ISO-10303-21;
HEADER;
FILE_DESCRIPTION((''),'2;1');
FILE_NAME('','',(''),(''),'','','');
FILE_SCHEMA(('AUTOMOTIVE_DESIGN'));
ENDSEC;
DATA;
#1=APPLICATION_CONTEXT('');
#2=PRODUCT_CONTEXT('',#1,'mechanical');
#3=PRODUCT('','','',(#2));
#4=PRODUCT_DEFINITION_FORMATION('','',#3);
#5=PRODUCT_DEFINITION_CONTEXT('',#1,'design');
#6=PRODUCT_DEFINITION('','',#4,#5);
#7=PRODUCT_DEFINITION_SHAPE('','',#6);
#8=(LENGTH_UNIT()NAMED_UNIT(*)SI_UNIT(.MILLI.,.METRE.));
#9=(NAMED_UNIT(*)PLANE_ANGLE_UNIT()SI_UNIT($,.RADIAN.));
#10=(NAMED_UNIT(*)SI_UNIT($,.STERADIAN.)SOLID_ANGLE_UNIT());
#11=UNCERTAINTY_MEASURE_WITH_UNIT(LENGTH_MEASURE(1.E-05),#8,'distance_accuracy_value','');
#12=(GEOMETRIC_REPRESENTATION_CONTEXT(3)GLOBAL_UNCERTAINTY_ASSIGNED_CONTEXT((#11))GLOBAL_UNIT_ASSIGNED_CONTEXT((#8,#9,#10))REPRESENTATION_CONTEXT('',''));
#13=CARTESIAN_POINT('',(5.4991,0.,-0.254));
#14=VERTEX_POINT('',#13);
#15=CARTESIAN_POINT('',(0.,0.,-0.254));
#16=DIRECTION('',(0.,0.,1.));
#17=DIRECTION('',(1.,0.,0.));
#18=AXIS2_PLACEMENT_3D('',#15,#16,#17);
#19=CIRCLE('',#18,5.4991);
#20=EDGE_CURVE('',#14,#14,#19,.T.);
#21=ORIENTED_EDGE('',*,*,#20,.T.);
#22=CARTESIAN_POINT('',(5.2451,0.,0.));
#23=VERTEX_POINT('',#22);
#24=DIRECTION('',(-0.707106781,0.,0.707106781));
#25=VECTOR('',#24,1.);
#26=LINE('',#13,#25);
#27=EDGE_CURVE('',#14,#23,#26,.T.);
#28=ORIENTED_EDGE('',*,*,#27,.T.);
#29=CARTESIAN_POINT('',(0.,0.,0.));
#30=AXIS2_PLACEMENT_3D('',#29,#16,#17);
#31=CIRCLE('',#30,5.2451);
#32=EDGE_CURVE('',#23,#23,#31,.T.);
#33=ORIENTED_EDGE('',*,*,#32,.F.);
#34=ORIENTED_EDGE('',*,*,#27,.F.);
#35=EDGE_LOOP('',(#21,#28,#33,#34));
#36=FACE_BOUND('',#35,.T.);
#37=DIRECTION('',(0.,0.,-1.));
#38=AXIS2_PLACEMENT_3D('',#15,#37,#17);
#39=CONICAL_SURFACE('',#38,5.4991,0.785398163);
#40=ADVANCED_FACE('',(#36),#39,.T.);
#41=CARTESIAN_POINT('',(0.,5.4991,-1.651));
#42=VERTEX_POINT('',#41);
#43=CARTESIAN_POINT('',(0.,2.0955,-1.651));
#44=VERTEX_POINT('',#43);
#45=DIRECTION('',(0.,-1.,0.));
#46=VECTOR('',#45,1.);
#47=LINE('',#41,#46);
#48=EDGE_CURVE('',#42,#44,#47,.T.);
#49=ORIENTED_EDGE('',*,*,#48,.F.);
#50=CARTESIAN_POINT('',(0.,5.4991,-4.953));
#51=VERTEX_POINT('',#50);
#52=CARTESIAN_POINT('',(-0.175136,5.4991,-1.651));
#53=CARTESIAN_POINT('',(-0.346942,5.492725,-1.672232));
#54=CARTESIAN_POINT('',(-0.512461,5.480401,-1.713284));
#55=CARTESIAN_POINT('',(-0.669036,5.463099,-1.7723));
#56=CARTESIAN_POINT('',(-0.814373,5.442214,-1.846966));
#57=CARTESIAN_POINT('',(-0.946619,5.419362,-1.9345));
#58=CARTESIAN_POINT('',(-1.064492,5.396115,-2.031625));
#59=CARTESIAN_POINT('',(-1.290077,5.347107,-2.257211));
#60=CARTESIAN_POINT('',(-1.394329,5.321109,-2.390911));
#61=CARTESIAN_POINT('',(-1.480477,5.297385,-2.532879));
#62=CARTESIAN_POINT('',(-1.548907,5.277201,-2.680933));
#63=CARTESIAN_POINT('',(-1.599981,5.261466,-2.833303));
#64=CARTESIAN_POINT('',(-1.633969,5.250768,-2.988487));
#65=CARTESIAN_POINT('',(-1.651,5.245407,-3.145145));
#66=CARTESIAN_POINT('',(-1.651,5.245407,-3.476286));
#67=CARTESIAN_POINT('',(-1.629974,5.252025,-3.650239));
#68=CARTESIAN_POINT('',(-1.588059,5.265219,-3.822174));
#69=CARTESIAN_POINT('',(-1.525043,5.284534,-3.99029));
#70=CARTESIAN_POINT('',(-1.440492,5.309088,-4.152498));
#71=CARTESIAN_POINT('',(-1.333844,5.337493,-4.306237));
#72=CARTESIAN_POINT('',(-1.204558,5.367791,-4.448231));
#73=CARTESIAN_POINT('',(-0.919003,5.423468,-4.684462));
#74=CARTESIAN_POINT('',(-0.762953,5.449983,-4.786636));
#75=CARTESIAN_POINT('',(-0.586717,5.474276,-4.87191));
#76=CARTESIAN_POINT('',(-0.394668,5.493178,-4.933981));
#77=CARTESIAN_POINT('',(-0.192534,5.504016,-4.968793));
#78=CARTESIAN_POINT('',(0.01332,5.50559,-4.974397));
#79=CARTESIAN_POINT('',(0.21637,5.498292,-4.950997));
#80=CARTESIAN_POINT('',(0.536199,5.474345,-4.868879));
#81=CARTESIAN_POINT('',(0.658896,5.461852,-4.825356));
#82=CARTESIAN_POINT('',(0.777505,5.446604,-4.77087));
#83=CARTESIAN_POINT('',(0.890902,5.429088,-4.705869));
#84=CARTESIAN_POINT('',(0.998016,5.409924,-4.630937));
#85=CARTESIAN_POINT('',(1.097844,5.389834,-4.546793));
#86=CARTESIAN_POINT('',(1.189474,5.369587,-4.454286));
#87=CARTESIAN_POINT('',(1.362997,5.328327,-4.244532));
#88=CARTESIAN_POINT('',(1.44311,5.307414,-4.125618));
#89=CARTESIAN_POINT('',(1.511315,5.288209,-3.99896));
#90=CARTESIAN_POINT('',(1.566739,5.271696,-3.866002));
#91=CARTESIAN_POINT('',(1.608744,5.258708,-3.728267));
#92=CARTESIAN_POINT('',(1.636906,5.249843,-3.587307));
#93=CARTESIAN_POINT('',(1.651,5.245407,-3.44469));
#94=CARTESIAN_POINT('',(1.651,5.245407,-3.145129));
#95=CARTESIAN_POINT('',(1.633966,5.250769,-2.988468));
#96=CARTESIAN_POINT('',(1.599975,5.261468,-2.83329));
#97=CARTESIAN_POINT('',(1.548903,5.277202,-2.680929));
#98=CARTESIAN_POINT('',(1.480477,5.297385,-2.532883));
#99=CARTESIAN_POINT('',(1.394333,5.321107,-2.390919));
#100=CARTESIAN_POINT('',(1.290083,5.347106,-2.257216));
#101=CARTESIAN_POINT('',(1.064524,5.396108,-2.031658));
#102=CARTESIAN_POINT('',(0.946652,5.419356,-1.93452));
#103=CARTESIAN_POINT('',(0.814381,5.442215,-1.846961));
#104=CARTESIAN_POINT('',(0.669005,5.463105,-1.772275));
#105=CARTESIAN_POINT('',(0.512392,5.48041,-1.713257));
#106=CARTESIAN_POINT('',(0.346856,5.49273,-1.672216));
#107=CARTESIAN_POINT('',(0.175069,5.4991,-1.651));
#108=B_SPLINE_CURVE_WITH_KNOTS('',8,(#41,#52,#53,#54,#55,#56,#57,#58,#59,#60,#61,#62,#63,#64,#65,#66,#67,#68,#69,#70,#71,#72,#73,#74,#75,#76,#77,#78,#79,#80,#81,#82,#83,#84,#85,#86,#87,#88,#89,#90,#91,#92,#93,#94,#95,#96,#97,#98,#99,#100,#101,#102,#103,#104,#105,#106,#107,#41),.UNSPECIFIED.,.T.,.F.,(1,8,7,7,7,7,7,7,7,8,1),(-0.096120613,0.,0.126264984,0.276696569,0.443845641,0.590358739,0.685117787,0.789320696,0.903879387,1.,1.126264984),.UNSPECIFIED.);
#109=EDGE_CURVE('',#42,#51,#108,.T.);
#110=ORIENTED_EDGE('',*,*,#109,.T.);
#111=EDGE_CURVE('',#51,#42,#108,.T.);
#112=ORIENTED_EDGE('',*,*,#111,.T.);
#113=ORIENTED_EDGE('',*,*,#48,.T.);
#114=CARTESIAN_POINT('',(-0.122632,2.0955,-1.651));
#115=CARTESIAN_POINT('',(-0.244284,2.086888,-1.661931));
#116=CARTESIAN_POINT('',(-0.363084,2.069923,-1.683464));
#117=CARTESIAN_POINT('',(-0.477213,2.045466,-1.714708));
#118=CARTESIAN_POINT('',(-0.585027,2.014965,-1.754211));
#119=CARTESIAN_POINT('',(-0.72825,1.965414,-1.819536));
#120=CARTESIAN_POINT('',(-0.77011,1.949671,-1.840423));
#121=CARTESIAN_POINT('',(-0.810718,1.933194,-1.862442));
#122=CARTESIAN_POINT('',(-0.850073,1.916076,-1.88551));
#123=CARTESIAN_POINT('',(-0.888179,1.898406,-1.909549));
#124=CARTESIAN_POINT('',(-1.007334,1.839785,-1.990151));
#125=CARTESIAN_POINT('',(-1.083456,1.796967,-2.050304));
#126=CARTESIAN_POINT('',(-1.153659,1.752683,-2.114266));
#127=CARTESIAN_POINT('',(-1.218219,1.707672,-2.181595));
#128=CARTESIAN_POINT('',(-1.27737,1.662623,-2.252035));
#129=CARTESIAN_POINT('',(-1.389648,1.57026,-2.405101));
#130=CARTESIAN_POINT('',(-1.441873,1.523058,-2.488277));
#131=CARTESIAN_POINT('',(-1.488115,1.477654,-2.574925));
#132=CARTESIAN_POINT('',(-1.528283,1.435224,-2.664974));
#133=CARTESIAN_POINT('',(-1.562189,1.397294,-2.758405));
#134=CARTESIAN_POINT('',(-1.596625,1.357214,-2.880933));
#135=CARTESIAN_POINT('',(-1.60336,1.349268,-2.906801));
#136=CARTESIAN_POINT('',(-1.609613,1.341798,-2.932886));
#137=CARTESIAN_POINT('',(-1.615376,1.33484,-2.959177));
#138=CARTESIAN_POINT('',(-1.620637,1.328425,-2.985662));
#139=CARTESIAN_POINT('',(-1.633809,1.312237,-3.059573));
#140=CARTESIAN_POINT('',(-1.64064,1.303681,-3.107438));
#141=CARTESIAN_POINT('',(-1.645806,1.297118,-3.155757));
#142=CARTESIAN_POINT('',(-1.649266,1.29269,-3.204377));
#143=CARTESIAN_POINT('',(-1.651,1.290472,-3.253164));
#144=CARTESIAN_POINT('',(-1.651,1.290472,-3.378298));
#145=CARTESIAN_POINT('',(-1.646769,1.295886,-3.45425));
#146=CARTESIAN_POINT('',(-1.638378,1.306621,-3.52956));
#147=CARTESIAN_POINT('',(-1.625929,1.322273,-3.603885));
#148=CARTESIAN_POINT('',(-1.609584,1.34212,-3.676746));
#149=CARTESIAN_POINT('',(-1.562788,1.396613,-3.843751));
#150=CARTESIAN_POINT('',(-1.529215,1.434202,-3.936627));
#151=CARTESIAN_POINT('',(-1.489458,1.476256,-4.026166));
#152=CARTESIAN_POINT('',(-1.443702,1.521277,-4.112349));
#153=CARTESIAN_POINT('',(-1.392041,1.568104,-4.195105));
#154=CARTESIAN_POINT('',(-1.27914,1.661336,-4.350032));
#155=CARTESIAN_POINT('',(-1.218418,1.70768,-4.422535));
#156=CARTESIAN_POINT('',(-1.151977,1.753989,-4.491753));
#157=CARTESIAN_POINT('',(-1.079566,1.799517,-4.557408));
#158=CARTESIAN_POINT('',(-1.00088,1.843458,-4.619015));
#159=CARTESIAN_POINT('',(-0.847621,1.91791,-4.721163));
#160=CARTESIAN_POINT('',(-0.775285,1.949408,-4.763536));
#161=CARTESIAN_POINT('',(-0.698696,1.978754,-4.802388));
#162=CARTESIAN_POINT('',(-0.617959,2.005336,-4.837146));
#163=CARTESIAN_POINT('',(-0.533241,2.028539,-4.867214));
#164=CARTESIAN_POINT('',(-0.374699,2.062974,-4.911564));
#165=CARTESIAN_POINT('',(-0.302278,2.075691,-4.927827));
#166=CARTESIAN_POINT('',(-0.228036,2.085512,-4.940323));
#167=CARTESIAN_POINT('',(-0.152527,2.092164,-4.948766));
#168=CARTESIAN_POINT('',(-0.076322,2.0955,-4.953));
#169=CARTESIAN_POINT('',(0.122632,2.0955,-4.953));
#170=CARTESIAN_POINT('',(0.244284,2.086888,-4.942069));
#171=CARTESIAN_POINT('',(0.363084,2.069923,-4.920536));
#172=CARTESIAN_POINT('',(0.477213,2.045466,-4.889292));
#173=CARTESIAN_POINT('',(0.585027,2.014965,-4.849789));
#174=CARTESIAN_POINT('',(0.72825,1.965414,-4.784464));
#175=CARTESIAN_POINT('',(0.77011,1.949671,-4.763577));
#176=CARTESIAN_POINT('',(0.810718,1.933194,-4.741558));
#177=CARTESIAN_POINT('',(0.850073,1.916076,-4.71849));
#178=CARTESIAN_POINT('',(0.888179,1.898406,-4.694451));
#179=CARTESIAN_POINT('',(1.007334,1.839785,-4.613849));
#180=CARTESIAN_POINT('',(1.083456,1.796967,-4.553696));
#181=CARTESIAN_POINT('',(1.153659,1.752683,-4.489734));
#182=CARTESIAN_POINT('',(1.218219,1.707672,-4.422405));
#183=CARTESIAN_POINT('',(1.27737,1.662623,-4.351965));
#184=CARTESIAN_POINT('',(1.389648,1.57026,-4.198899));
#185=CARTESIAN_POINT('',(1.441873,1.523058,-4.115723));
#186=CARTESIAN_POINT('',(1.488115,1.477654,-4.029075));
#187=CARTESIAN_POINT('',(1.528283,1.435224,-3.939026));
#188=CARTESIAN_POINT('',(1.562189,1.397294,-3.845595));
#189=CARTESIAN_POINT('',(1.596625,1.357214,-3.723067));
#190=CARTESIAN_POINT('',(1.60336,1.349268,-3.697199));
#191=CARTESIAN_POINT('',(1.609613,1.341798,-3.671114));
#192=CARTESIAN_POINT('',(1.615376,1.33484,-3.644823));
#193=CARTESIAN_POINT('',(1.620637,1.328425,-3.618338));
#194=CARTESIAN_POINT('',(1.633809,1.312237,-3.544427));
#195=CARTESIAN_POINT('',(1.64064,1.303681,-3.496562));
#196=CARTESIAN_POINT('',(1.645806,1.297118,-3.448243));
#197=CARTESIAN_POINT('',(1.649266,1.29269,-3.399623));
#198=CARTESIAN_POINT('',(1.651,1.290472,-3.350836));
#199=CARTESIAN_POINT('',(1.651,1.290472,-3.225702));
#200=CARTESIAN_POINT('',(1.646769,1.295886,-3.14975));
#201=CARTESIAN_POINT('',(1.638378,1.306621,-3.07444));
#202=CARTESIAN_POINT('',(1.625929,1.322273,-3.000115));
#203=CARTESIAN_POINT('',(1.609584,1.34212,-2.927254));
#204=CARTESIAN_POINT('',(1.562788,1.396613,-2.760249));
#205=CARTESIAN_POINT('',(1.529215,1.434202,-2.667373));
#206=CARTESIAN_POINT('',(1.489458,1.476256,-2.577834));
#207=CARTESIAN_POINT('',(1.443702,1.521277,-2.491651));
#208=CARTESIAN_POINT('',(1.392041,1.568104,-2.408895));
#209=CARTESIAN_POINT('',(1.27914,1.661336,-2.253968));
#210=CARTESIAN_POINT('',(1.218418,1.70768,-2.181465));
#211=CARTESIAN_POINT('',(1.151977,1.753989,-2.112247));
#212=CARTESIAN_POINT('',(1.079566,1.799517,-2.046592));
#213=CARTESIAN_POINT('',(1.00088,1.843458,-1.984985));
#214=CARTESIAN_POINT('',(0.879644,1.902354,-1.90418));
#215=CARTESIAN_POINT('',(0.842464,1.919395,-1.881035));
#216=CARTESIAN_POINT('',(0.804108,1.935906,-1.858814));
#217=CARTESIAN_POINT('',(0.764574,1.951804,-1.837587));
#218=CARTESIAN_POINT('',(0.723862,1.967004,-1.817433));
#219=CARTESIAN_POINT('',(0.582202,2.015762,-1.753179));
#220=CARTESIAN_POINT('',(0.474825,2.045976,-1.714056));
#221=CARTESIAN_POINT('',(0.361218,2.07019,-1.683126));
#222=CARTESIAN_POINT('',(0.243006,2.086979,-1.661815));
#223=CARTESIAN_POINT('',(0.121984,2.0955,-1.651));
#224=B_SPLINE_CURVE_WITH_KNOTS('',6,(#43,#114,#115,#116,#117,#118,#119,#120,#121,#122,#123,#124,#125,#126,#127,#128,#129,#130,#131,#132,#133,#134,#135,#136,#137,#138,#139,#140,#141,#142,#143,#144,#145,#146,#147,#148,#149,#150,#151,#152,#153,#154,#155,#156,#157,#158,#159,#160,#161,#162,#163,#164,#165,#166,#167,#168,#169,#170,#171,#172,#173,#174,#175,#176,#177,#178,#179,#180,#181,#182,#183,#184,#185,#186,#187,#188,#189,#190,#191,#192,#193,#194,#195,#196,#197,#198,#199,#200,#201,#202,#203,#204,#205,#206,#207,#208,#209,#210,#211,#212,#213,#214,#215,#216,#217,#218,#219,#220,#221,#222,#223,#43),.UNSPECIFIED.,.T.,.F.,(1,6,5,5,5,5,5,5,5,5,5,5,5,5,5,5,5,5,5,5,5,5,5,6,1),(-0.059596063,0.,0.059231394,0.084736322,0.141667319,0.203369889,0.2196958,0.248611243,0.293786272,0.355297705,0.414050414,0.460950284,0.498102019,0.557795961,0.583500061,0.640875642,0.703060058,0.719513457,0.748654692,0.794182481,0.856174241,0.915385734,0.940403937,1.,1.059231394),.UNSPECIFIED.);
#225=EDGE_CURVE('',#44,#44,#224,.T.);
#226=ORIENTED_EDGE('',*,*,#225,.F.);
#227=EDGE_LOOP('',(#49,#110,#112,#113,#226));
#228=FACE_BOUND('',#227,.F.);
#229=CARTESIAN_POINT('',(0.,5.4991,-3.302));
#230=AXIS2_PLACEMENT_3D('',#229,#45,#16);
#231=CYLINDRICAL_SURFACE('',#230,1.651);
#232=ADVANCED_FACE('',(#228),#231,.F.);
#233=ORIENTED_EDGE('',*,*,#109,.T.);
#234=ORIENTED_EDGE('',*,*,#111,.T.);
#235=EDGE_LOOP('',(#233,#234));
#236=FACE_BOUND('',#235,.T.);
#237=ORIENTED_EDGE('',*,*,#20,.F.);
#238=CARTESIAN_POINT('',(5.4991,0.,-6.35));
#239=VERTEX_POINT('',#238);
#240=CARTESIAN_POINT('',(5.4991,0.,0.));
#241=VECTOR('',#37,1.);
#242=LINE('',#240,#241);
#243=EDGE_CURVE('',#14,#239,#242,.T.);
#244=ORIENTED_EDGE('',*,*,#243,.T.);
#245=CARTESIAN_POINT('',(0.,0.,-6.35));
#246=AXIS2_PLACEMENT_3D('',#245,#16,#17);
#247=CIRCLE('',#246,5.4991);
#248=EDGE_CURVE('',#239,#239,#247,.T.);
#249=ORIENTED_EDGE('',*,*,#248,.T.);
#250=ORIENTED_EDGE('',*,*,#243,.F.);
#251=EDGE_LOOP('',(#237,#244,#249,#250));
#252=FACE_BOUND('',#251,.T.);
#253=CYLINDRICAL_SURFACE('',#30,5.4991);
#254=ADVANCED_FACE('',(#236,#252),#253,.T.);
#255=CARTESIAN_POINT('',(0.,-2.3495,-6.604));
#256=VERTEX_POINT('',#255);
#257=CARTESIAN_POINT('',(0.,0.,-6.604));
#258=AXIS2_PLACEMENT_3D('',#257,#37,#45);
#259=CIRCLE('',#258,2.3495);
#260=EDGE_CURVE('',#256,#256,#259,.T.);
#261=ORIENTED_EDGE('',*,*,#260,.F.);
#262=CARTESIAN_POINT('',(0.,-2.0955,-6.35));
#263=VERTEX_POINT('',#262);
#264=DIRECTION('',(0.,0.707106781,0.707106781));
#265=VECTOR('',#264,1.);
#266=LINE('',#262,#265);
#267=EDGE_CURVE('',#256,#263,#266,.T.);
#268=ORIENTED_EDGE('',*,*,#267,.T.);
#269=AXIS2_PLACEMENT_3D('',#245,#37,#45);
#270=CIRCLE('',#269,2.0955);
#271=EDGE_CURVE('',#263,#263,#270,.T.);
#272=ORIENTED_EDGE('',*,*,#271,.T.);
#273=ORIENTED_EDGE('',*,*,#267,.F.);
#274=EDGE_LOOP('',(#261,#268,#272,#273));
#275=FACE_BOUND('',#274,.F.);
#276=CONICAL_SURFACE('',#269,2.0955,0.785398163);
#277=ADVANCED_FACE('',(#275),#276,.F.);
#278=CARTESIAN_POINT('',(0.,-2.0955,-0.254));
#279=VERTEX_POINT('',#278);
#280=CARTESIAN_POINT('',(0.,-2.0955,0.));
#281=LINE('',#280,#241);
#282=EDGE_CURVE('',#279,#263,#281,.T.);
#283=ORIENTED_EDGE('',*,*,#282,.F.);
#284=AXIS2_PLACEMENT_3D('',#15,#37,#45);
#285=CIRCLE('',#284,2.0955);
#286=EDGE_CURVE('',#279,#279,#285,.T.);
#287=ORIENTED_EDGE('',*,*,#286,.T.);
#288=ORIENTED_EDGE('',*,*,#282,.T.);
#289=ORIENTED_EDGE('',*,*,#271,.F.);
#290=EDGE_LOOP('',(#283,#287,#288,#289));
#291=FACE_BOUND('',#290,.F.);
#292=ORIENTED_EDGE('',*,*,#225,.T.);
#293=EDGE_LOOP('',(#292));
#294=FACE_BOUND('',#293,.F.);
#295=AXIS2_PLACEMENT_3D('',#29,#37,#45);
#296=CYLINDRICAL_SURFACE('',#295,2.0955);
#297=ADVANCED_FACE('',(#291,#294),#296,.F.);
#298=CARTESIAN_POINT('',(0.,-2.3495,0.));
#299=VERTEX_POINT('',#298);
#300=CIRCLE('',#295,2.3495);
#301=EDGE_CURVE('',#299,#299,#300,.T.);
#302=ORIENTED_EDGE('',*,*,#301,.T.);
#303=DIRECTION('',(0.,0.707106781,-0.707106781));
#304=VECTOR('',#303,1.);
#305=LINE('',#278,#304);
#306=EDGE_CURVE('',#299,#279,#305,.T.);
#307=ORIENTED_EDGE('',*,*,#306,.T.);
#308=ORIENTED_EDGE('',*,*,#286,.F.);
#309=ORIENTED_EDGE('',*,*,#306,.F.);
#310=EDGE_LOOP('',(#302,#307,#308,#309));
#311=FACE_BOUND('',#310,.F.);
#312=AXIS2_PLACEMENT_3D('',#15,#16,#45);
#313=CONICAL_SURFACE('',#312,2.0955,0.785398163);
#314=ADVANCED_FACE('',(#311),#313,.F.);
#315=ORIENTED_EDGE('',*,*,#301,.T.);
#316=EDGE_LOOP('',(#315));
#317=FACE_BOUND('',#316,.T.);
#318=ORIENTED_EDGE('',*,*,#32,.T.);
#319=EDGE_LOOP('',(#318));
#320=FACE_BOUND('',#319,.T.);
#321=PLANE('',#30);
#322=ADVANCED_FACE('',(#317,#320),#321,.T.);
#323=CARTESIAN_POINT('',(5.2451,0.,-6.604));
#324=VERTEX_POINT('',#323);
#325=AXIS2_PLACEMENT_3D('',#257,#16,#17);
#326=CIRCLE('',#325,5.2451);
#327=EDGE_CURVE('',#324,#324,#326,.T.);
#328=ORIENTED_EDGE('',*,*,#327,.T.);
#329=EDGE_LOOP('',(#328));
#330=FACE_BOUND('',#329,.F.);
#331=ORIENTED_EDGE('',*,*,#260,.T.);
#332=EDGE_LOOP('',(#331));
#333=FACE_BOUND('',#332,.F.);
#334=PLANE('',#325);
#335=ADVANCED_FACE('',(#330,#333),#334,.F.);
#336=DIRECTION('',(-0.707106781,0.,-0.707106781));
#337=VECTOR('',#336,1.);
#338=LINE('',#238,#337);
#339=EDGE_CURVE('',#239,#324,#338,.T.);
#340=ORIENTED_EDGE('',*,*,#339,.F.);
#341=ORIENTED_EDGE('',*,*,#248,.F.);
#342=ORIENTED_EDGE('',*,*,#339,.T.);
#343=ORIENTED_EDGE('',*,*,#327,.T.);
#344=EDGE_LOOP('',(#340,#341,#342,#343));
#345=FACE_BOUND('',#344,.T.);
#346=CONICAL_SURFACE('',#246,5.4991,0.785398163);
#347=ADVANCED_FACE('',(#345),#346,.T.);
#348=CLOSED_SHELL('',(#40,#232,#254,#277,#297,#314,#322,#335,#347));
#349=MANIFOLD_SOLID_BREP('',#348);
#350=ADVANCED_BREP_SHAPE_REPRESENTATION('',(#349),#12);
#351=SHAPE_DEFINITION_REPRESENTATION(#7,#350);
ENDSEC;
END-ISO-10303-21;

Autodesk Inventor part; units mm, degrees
ref_plane "YZ Plane" through (0, 0, 0) normal (1, 0, 0) x (0, 1, 0)
ref_plane "XY Plane" through (0, 0, 0) normal (0, 0, 1) x (1, 0, 0)
sketch "Sketch1" plane through (0, 0, 0) normal (0, 0, 1) x (1, 0, 0)
  circle A0 centre (0, 0) radius 5.4991
  dimension "d0" = 10.9982
extrude "Extrusion1" add sketch "Sketch1" against normal blind 6.604
chamfer "Chamfer1" distance 0.254 angle 45 2 edges at (-5.4991, 0, 0) (-5.4991, 0, -6.604)
sketch "Sketch2" plane through (0, 0, 0) normal (0, 0, 1) x (1, 0, 0)
  circle A0 centre (0, 0) radius 5.2451 projected
hole "Hole1" at (0, 0, 0) direction (0, 0, -1) diameter 4.191 end through all
ref_plane "Work Plane1" through (0, 5.4991, 0) normal (0, 1, 0) x (-1, 0, 0)
sketch "Sketch3" plane through (0, 5.4991, 0) normal (0, 1, 0) x (-1, 0, 0)
  line L0 (-5.2451, 0) -> (5.2451, 0) projected
  line L1 (5.4991, -0.254) -> (5.4991, -6.35) projected
  point P0 (0, 0)
  point P1 (0, -3.302)
hole "Hole2" at (0, 5.4991, -3.302) direction (0, -1, 0) diameter 3.302 end up to surface thread size "8-32 UNC" class "2B" standard "ANSI Unified Screw Threads"
chamfer "Chamfer2" distance 0.254 angle 45 2 edges at (0, 2.0955, 0) (0, 2.0955, -6.604)
properties part number "Shaft Collar"
